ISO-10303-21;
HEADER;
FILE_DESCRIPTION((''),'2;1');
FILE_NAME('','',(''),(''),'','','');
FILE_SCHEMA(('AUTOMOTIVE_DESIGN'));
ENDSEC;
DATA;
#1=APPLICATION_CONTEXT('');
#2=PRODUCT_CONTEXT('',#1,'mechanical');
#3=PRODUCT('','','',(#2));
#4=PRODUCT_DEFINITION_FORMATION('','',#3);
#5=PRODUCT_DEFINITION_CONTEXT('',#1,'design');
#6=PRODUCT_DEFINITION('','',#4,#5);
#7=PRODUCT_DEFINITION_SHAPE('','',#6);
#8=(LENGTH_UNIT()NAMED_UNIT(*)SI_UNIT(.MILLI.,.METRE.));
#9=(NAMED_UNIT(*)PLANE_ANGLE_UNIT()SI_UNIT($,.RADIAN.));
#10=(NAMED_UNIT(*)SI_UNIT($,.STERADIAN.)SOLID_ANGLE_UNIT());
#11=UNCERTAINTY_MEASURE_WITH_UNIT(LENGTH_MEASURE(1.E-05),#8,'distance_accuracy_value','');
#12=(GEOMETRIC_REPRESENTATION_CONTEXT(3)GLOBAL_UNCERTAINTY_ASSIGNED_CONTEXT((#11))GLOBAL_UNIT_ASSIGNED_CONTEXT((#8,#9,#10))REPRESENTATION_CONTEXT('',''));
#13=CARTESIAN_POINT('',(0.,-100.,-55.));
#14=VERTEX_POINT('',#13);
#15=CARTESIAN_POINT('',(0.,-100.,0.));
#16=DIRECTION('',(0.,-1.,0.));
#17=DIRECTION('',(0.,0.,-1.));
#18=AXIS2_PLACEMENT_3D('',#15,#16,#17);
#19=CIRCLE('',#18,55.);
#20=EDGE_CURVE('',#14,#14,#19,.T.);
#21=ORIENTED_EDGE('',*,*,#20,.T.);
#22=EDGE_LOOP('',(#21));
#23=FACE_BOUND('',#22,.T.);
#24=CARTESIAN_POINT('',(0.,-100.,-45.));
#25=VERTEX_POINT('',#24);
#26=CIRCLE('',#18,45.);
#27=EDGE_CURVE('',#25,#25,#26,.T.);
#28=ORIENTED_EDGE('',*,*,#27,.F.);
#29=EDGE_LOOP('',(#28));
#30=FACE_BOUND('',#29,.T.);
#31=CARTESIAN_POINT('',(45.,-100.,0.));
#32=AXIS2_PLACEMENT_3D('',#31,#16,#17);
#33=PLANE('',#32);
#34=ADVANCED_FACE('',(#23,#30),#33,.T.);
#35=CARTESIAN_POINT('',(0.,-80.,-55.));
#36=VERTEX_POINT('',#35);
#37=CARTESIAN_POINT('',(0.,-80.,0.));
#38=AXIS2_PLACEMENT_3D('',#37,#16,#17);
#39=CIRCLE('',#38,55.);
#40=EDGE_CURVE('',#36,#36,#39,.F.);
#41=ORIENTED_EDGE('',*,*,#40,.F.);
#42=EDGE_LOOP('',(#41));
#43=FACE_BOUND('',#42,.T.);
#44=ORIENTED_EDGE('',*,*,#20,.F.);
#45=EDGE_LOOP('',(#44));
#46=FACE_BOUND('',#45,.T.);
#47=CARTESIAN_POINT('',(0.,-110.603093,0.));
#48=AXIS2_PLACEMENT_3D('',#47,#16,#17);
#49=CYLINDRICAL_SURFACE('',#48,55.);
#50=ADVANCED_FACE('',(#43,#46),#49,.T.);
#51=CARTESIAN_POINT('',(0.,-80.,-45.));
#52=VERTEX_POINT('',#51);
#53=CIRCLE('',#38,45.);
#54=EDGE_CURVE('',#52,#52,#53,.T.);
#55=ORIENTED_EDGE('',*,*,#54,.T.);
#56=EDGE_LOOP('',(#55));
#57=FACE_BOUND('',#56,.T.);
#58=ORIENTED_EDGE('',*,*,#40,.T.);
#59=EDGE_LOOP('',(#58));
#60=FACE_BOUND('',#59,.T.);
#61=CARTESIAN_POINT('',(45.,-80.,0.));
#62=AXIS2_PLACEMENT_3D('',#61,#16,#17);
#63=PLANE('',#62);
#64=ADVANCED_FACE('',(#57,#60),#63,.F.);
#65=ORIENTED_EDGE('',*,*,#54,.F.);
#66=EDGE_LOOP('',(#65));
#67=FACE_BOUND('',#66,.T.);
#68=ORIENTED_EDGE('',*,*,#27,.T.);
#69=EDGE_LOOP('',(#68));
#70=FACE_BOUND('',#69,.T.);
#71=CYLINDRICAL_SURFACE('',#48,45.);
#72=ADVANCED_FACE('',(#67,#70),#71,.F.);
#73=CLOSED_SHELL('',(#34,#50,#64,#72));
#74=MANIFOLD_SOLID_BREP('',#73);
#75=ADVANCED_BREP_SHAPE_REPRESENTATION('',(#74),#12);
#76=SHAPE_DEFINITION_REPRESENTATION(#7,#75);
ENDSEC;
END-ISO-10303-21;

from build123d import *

# Parameters (mm, degrees)
SKETCH_1_W                = 10
SKETCH_1_H                = 200
SURFACE_START             = -80
SURFACE_CUT_1_OUTLINE_R   = 55
SURFACE_CUT_1_OUTLINE_R_2 = 45
SURFACE_CUT_1_DEPTH       = 180


# Read off the part's stored shape, not the designer's step: Сечение1
with BuildPart() as part:
    # Эскиз1 → Повернуть1 (revolve)
    with BuildSketch(Plane.XY, mode=Mode.PRIVATE) as revolve_1_sk:
        with Locations((50, 0)):
            Rectangle(SKETCH_1_W, SKETCH_1_H)
    revolve(revolve_1_sk.sketch.rotate(Axis((0, -110.603092707, 0), (0, 1, 0)), 90), axis=Axis((0, -110.603092707, 0), (0, 1, 0)))

    # Surface Cut 1 outline → Surface Cut 1 (cut)
    with BuildSketch(Plane(origin=(0, 0, 0), x_dir=(1, 0, 0), z_dir=(0, 1, 0)).offset(SURFACE_START)):
        Circle(SURFACE_CUT_1_OUTLINE_R)
        Circle(SURFACE_CUT_1_OUTLINE_R_2, mode=Mode.SUBTRACT)
    extrude(amount=SURFACE_CUT_1_DEPTH, mode=Mode.SUBTRACT)


solid = part.part
